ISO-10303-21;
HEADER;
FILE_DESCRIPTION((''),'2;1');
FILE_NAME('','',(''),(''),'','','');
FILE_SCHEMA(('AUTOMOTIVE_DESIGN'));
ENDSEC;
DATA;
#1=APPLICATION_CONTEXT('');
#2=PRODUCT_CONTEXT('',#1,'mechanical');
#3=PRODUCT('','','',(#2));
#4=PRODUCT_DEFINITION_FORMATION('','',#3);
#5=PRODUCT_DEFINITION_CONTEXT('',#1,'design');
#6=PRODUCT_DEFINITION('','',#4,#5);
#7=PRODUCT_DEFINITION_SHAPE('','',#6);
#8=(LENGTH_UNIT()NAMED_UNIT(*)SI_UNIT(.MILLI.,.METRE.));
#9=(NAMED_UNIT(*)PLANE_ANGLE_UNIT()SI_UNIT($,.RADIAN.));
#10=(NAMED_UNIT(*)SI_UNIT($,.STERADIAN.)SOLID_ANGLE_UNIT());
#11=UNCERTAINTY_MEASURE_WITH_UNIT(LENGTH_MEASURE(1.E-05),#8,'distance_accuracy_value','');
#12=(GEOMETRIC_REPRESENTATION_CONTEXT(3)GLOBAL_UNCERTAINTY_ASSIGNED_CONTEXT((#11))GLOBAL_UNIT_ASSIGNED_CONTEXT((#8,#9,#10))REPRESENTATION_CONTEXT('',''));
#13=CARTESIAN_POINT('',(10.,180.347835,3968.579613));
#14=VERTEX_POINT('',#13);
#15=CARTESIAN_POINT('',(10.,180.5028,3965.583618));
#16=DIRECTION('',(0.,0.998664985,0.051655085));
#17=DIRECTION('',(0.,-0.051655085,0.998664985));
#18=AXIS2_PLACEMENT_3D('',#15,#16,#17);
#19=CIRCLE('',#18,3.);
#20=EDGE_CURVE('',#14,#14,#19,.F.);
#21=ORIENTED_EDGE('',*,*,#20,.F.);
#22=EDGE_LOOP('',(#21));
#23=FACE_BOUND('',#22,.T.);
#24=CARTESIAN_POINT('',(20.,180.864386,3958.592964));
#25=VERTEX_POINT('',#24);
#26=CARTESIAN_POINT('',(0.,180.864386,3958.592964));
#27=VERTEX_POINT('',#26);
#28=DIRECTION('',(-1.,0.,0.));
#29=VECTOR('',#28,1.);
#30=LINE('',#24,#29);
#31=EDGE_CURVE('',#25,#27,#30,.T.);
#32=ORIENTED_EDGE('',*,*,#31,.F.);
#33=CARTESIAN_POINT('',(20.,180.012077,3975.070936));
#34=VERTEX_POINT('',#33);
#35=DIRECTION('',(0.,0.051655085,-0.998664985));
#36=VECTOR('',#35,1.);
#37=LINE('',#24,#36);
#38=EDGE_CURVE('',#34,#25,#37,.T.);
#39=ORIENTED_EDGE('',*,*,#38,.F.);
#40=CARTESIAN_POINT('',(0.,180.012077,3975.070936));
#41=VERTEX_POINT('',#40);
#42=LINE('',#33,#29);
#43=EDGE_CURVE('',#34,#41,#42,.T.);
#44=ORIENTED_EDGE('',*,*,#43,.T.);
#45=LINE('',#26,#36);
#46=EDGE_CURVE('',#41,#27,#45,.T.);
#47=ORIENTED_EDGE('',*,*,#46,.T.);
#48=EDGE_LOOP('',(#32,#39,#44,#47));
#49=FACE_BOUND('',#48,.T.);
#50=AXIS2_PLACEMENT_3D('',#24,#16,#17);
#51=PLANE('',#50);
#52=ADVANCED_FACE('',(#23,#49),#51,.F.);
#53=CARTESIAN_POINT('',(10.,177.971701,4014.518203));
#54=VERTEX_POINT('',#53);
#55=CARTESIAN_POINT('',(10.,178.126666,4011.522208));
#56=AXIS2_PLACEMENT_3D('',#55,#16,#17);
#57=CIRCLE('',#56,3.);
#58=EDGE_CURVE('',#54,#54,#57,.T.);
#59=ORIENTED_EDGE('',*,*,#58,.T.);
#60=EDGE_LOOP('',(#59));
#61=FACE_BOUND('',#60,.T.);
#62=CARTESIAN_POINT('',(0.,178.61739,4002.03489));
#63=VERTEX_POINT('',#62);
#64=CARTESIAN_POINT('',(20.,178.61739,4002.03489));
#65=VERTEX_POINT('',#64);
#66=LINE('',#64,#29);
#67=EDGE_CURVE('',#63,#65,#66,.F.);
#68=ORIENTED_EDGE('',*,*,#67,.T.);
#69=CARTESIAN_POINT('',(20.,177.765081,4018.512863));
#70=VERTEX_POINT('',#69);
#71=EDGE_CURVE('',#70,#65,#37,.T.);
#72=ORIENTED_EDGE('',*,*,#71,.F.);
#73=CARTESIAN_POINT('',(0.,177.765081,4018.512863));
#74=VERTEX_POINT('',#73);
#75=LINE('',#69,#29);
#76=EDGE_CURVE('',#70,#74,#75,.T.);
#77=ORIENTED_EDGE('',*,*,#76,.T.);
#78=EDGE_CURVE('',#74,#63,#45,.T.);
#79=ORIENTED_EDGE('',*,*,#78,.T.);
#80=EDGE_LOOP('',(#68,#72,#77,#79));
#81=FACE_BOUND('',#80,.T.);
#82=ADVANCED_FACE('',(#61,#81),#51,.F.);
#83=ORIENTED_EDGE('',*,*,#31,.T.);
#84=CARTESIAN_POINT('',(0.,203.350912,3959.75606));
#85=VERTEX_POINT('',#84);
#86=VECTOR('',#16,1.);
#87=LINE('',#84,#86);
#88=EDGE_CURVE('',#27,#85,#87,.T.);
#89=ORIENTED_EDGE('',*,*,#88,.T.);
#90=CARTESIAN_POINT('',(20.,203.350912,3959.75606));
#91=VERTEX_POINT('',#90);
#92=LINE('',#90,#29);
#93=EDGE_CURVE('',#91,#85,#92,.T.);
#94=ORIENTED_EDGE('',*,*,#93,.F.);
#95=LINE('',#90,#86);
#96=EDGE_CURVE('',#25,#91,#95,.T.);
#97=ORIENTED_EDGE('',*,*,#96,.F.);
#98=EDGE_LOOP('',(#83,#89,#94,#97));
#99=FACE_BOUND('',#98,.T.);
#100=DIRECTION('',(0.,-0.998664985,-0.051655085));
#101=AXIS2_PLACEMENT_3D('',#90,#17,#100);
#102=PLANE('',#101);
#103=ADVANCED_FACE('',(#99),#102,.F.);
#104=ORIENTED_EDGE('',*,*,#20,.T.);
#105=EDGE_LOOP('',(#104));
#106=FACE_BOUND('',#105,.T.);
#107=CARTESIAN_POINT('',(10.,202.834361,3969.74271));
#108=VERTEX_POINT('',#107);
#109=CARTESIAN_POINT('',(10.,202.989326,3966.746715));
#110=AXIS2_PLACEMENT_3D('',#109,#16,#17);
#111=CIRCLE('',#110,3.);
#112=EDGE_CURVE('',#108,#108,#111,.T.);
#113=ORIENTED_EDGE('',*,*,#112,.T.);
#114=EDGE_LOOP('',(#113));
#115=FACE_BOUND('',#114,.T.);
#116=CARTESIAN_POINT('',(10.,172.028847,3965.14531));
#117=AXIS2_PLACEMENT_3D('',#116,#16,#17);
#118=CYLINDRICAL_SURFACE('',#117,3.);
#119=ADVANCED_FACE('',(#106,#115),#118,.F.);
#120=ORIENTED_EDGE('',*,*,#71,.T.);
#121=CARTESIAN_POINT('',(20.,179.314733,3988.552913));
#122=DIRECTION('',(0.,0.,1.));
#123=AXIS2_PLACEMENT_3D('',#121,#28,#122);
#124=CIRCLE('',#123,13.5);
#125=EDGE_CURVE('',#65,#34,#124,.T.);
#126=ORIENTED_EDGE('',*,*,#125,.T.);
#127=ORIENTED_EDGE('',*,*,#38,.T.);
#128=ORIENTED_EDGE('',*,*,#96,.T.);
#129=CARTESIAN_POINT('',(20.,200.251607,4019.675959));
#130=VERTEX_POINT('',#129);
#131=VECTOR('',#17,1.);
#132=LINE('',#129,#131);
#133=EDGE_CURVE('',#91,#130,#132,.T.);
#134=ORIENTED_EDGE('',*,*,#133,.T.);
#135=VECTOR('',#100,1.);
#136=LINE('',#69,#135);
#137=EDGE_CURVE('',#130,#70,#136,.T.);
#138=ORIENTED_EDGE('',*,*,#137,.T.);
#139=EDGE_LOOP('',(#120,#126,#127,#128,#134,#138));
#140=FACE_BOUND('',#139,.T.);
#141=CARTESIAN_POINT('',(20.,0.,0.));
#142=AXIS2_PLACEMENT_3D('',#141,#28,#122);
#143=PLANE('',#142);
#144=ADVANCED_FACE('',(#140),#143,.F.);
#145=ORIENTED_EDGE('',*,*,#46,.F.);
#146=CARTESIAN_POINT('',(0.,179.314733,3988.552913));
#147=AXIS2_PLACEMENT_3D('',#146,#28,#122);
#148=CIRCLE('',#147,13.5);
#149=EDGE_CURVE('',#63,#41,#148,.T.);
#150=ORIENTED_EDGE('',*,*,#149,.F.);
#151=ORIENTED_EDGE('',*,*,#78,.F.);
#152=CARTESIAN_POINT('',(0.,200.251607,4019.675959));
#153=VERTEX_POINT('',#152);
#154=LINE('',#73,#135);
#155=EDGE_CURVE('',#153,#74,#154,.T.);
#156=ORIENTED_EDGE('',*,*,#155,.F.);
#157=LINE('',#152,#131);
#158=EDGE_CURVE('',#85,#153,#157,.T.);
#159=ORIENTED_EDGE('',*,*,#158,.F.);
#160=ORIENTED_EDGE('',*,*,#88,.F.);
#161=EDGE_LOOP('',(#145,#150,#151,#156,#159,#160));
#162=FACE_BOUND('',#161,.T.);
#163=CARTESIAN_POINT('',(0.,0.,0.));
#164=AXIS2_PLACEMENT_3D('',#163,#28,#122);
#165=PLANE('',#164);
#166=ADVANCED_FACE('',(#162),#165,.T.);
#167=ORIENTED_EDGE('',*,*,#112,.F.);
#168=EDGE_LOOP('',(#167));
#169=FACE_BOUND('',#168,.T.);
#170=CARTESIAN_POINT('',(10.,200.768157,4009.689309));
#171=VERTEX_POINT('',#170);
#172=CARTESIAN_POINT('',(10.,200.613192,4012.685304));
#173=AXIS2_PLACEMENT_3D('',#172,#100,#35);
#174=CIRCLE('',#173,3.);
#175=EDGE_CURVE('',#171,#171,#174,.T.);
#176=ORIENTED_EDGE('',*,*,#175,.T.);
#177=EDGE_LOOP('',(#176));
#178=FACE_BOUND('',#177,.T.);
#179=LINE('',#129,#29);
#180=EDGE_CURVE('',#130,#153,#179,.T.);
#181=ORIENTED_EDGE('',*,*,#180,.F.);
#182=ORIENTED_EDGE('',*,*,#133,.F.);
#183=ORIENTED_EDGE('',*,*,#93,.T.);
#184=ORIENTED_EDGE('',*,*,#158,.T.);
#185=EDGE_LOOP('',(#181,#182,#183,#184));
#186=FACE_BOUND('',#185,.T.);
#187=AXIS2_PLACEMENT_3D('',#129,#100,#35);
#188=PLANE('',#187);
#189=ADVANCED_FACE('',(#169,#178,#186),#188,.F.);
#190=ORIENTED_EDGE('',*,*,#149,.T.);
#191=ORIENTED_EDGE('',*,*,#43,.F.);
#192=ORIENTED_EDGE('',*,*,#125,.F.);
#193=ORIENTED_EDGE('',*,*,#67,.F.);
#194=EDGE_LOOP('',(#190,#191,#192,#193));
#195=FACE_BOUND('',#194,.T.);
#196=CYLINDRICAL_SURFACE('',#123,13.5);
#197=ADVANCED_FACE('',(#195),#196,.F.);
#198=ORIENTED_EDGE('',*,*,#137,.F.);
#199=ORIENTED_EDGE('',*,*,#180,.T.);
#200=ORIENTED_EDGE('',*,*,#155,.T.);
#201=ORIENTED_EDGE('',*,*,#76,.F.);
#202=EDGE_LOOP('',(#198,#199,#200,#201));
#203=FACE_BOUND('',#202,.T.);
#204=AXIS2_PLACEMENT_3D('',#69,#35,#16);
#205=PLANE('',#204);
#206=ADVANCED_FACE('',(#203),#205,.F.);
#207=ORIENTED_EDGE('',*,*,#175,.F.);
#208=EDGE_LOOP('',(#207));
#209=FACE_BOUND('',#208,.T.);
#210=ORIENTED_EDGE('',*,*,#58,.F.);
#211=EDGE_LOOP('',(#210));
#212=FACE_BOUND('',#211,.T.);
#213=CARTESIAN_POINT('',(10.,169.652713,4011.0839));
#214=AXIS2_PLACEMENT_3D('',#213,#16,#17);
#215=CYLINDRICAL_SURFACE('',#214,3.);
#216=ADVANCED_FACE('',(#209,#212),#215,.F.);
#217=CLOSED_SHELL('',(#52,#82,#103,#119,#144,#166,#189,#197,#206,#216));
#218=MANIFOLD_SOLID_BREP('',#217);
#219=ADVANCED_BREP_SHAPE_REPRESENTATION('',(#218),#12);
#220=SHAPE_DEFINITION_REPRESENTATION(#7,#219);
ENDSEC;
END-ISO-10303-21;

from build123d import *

# Parameters (mm, degrees)
EXTRUDE_1_DEPTH     = 20
SKETCH_3_R          = 13.5
CUT_EXTRUDE_1_DEPTH = 20
SKETCH_4_R          = 3
CUT_EXTRUDE_2_DEPTH = 22.516585743


# Read off the part's stored shape, not the designer's step: 填料-伸長1
with BuildPart() as part:
    # 填料-伸長1 outline → 填料-伸長1 (new body)
    with BuildSketch(Plane(origin=(0, 0, 0), x_dir=(0, 0, -1), z_dir=(1, 0, 0))):
        Polygon((-4019.675958787, 200.25160655), (-4018.512862627, 177.765080788), (-3958.59296353, 180.864385914), (-3959.75605969, 203.350911676), align=None)
    extrude(amount=EXTRUDE_1_DEPTH)

    # 草圖3 → 除料-伸長1 (cut)
    with BuildSketch(Plane.ZY):
        with Locations((3988.552913079, 179.314733351)):
            Circle(SKETCH_3_R)
    extrude(amount=-CUT_EXTRUDE_1_DEPTH, mode=Mode.SUBTRACT)

    # 草圖4 → 除料-伸長2 (cut)
    with BuildSketch(Plane(origin=(0, 407.076792548, 21.055696166), x_dir=(1, 0, 0), z_dir=(0, 0.9986649849421085, 0.051655085428040495))):
        with Locations(Location((10, -3950.965617011, 0), (0, 0, 270))):
            Circle(SKETCH_4_R)
    cut_extrude_2 = extrude(amount=-CUT_EXTRUDE_2_DEPTH, mode=Mode.SUBTRACT)

    # 鏡射1: 除料-伸長2 across plane
    add(cut_extrude_2.mirror(Plane(origin=(0, -205.275533435, 3968.660313072), x_dir=(1, 0, 0), z_dir=(0, 0.05165508542804326, -0.9986649849421085))), mode=Mode.SUBTRACT)


solid = part.part
